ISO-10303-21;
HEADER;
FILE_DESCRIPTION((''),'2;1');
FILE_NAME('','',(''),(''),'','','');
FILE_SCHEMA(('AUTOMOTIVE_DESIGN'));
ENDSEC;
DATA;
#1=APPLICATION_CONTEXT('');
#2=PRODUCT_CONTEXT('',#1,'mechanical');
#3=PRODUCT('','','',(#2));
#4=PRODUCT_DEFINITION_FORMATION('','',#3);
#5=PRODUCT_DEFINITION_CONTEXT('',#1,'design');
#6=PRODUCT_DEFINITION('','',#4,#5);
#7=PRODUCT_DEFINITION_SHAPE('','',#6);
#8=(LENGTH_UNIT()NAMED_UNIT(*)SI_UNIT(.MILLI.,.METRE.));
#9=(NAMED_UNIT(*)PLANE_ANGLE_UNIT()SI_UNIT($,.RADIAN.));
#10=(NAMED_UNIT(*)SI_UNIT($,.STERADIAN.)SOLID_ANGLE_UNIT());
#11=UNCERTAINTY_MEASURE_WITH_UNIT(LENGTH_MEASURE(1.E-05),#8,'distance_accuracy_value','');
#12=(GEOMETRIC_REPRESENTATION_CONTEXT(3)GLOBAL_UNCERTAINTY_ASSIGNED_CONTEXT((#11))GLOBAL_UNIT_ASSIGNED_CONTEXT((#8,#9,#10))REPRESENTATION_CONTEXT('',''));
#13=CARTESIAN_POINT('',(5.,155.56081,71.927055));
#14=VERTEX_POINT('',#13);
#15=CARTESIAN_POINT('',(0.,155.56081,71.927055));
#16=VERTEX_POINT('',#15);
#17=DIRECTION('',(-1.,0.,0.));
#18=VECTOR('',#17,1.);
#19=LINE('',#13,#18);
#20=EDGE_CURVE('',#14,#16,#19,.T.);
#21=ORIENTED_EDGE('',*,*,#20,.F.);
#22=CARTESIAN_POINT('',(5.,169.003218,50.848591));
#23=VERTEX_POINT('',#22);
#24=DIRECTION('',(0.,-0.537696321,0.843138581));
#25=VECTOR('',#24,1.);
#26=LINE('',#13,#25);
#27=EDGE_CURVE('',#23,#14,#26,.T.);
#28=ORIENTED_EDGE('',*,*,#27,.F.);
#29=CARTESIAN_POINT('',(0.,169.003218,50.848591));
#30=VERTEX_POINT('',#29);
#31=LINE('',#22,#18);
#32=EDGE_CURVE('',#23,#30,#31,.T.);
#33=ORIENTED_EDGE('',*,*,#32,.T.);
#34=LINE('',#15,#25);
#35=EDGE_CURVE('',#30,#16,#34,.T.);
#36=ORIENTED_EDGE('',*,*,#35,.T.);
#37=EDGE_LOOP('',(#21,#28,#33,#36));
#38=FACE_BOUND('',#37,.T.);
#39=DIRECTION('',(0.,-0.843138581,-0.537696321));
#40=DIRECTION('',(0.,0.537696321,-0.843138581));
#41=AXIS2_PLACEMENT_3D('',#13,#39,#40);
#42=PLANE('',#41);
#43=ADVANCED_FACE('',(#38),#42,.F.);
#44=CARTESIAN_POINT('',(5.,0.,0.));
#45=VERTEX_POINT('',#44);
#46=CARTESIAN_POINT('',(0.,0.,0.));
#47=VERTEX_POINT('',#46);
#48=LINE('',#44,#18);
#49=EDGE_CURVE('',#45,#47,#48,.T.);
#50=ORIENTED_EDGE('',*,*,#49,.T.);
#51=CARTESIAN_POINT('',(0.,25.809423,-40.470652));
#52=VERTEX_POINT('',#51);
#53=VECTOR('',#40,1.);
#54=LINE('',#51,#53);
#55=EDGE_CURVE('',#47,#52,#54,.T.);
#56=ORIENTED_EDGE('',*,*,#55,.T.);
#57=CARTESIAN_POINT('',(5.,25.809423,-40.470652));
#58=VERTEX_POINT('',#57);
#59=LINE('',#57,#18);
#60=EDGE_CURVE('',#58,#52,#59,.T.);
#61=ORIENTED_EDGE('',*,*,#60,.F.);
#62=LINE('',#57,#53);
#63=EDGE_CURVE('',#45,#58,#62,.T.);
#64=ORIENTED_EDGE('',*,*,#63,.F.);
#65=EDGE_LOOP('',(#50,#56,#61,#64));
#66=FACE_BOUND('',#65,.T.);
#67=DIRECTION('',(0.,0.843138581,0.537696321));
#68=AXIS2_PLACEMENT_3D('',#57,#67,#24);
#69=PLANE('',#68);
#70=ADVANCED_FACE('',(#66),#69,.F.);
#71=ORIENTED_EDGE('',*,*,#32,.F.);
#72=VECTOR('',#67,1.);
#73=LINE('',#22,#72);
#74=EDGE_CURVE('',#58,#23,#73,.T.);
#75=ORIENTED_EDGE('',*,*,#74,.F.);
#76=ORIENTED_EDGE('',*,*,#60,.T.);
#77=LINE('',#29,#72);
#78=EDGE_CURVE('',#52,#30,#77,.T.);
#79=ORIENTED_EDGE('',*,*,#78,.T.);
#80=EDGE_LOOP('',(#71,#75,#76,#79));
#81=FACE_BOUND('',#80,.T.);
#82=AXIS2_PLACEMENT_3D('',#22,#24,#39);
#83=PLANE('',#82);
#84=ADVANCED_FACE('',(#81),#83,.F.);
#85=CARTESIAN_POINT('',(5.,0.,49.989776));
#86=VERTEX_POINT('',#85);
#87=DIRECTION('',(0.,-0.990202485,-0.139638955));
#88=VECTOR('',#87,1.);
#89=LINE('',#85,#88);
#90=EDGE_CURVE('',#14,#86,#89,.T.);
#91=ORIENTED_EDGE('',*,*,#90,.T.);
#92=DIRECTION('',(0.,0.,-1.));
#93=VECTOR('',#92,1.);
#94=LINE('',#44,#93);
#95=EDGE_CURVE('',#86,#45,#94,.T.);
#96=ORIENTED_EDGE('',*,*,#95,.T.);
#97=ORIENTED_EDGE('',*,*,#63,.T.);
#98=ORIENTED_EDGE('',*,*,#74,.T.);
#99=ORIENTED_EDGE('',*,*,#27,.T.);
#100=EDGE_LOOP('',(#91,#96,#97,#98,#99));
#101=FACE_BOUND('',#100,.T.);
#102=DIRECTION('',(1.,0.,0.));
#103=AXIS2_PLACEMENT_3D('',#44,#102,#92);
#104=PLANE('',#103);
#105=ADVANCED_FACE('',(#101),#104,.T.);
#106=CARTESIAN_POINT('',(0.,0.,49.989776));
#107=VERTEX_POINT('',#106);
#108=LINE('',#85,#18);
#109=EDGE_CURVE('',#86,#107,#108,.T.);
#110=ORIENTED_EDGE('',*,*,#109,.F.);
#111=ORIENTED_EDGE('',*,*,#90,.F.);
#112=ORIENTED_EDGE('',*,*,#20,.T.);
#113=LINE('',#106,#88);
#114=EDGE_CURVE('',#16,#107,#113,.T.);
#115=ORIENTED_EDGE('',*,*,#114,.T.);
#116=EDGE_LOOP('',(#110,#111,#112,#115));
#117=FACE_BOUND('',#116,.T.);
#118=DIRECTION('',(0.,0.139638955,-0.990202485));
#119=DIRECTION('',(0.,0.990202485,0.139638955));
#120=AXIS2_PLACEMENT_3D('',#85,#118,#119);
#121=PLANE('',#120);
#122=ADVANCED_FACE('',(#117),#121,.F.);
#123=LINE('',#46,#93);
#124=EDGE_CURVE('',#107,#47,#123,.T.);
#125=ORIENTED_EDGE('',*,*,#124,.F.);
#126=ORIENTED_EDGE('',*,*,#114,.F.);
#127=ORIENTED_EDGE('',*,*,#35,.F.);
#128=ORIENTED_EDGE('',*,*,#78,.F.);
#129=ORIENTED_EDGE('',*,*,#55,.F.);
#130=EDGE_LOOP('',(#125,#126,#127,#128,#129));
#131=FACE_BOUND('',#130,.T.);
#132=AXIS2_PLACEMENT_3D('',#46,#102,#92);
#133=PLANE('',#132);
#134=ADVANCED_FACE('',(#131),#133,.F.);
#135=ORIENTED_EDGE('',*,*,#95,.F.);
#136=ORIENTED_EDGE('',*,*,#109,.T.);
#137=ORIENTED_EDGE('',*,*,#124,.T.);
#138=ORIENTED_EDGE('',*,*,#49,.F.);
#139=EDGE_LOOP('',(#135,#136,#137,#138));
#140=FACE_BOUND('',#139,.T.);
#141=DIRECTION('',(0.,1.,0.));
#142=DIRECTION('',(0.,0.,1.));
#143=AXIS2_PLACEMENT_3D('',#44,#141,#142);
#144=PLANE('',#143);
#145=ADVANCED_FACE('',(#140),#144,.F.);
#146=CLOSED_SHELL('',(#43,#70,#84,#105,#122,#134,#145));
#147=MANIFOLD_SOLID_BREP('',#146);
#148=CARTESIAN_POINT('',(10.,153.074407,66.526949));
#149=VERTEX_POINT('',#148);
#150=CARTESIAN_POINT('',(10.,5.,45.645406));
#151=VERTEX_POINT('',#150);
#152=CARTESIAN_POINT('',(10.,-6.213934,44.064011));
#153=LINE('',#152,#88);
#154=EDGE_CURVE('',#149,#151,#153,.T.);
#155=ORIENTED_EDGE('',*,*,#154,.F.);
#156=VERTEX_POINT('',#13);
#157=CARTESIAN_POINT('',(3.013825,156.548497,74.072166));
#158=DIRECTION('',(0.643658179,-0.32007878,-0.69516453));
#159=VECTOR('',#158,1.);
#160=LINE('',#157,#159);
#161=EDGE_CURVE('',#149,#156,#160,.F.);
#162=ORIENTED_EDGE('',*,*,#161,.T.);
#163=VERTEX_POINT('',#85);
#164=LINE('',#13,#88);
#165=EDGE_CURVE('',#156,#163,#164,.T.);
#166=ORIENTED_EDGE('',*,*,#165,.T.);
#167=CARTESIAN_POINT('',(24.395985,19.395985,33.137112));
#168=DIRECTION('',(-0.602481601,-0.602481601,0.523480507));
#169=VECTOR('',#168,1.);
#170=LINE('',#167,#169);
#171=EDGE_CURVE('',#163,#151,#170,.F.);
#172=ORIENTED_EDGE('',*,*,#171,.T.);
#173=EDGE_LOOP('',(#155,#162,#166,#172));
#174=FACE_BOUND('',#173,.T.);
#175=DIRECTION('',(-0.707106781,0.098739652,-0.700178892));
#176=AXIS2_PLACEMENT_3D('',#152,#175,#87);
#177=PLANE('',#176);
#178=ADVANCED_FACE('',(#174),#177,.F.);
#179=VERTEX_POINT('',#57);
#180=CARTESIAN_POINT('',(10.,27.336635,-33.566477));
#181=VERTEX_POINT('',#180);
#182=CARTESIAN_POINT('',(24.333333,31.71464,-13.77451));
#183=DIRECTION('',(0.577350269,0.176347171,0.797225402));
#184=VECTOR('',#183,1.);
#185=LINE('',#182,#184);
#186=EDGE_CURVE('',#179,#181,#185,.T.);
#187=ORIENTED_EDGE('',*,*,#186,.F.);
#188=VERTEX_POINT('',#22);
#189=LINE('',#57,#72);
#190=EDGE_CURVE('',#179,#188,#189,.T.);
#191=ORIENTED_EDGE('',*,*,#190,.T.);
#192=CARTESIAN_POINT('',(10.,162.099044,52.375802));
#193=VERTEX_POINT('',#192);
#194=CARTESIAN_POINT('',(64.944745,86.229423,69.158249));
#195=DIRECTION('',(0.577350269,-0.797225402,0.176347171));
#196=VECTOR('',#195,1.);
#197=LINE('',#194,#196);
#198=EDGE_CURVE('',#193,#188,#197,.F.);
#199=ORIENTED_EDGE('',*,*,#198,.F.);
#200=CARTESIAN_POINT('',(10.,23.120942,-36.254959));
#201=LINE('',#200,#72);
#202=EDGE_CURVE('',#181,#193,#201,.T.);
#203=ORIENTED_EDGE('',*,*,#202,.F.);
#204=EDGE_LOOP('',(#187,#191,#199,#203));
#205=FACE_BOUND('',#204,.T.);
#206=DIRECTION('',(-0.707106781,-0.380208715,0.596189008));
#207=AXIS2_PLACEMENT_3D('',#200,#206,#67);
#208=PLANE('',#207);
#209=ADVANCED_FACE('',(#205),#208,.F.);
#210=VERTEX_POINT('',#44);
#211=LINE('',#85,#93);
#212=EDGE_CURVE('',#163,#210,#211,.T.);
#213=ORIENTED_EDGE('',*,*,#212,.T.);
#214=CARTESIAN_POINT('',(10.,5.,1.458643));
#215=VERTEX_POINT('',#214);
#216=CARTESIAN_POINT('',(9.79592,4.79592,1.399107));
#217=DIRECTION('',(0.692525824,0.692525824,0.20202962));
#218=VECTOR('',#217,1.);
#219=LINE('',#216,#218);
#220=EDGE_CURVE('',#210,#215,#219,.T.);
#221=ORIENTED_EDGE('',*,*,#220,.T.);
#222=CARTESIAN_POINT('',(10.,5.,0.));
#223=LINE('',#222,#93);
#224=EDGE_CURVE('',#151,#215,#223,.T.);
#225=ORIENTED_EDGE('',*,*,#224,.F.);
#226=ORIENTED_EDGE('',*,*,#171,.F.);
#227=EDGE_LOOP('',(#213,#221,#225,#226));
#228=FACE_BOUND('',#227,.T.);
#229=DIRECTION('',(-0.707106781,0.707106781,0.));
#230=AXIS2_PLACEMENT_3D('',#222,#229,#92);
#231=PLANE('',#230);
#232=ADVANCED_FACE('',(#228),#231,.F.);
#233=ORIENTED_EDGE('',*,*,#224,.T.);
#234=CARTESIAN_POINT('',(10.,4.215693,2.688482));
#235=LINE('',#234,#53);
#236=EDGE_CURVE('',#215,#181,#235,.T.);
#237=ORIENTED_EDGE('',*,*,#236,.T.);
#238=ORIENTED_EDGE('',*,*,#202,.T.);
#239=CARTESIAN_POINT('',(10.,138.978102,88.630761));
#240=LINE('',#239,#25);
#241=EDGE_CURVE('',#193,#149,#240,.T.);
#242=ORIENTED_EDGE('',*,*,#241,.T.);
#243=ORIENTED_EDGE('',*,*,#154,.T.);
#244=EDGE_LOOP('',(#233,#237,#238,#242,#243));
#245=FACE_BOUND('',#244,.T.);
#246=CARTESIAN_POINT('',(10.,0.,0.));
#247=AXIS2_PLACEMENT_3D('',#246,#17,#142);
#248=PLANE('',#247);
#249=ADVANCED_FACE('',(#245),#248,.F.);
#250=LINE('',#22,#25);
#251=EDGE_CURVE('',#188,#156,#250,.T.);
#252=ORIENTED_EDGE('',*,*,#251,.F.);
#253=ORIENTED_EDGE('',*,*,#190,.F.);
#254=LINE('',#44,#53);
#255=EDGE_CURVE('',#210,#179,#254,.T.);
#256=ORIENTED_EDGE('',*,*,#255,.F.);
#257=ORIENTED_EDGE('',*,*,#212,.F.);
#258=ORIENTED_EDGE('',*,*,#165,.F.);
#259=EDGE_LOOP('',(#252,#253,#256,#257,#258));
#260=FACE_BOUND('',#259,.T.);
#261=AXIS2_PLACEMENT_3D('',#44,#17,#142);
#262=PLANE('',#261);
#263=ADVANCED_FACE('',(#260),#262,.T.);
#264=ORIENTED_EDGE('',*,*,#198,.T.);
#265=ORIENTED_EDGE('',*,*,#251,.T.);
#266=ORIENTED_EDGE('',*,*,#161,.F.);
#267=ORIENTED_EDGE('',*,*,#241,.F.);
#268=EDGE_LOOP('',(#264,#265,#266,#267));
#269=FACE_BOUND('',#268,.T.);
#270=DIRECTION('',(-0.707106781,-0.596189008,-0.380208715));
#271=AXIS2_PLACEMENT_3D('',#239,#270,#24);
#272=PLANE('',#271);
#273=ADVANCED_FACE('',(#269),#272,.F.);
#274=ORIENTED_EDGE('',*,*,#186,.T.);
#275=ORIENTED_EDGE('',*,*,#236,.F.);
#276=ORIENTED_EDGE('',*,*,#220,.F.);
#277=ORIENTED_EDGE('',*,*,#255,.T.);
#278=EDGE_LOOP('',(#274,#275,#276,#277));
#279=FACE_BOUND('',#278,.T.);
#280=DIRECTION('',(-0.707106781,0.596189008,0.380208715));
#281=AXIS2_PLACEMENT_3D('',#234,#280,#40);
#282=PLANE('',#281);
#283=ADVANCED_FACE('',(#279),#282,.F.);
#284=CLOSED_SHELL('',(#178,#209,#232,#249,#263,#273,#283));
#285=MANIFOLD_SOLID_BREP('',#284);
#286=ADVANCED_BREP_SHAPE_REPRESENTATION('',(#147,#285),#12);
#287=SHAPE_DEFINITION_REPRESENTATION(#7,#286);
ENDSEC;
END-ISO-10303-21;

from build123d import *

# Parameters (mm, degrees)
EXTRUDE_1_DEPTH = 5
EXTRUDE_2_DEPTH = 5
CHAMFER_1_SIZE  = 5


with BuildPart() as part:
    # 草图1 → 凸台-拉伸1 (new body)
    with BuildSketch(Plane(origin=(0, 0, 0), x_dir=(0, 0, -1), z_dir=(1, 0, 0))):
        Polygon((0, 0), (-49.989775554, 0), (-71.927055422, 155.560810463), (-50.848590899, 169.003218482), (40.470651885, 25.809423396), align=None)
    extrude(amount=EXTRUDE_1_DEPTH)


with BuildPart() as body_2:
    # 草图2 → 凸台-拉伸2 (new body)
    with BuildSketch(Plane(origin=(5, 0, 0), x_dir=(0, 0, -1), z_dir=(1, 0, 0))):
        Polygon((0, 0), (40.470651885, 25.809423396), (-50.848590899, 169.003218482), (-71.927055422, 155.560810463), (-49.989775554, 0), align=None)
    extrude(amount=EXTRUDE_2_DEPTH)

    # 倒角1
    chamfer_1_edges = [body_2.edges().sort_by_distance(p)[0] for p in [
        (10, 77.780405232, 60.958415488),
        (10, 162.282014473, 61.38782316),
        (10, 97.406320939, 5.188969507),
        (10, 12.904711698, -20.235325942),
        (10, 0, 24.994887777),
    ]]
    chamfer(chamfer_1_edges, length=CHAMFER_1_SIZE - 0.0001)  # a hair under: the kernel refuses the full size


solid = Compound([part.part, body_2.part])
